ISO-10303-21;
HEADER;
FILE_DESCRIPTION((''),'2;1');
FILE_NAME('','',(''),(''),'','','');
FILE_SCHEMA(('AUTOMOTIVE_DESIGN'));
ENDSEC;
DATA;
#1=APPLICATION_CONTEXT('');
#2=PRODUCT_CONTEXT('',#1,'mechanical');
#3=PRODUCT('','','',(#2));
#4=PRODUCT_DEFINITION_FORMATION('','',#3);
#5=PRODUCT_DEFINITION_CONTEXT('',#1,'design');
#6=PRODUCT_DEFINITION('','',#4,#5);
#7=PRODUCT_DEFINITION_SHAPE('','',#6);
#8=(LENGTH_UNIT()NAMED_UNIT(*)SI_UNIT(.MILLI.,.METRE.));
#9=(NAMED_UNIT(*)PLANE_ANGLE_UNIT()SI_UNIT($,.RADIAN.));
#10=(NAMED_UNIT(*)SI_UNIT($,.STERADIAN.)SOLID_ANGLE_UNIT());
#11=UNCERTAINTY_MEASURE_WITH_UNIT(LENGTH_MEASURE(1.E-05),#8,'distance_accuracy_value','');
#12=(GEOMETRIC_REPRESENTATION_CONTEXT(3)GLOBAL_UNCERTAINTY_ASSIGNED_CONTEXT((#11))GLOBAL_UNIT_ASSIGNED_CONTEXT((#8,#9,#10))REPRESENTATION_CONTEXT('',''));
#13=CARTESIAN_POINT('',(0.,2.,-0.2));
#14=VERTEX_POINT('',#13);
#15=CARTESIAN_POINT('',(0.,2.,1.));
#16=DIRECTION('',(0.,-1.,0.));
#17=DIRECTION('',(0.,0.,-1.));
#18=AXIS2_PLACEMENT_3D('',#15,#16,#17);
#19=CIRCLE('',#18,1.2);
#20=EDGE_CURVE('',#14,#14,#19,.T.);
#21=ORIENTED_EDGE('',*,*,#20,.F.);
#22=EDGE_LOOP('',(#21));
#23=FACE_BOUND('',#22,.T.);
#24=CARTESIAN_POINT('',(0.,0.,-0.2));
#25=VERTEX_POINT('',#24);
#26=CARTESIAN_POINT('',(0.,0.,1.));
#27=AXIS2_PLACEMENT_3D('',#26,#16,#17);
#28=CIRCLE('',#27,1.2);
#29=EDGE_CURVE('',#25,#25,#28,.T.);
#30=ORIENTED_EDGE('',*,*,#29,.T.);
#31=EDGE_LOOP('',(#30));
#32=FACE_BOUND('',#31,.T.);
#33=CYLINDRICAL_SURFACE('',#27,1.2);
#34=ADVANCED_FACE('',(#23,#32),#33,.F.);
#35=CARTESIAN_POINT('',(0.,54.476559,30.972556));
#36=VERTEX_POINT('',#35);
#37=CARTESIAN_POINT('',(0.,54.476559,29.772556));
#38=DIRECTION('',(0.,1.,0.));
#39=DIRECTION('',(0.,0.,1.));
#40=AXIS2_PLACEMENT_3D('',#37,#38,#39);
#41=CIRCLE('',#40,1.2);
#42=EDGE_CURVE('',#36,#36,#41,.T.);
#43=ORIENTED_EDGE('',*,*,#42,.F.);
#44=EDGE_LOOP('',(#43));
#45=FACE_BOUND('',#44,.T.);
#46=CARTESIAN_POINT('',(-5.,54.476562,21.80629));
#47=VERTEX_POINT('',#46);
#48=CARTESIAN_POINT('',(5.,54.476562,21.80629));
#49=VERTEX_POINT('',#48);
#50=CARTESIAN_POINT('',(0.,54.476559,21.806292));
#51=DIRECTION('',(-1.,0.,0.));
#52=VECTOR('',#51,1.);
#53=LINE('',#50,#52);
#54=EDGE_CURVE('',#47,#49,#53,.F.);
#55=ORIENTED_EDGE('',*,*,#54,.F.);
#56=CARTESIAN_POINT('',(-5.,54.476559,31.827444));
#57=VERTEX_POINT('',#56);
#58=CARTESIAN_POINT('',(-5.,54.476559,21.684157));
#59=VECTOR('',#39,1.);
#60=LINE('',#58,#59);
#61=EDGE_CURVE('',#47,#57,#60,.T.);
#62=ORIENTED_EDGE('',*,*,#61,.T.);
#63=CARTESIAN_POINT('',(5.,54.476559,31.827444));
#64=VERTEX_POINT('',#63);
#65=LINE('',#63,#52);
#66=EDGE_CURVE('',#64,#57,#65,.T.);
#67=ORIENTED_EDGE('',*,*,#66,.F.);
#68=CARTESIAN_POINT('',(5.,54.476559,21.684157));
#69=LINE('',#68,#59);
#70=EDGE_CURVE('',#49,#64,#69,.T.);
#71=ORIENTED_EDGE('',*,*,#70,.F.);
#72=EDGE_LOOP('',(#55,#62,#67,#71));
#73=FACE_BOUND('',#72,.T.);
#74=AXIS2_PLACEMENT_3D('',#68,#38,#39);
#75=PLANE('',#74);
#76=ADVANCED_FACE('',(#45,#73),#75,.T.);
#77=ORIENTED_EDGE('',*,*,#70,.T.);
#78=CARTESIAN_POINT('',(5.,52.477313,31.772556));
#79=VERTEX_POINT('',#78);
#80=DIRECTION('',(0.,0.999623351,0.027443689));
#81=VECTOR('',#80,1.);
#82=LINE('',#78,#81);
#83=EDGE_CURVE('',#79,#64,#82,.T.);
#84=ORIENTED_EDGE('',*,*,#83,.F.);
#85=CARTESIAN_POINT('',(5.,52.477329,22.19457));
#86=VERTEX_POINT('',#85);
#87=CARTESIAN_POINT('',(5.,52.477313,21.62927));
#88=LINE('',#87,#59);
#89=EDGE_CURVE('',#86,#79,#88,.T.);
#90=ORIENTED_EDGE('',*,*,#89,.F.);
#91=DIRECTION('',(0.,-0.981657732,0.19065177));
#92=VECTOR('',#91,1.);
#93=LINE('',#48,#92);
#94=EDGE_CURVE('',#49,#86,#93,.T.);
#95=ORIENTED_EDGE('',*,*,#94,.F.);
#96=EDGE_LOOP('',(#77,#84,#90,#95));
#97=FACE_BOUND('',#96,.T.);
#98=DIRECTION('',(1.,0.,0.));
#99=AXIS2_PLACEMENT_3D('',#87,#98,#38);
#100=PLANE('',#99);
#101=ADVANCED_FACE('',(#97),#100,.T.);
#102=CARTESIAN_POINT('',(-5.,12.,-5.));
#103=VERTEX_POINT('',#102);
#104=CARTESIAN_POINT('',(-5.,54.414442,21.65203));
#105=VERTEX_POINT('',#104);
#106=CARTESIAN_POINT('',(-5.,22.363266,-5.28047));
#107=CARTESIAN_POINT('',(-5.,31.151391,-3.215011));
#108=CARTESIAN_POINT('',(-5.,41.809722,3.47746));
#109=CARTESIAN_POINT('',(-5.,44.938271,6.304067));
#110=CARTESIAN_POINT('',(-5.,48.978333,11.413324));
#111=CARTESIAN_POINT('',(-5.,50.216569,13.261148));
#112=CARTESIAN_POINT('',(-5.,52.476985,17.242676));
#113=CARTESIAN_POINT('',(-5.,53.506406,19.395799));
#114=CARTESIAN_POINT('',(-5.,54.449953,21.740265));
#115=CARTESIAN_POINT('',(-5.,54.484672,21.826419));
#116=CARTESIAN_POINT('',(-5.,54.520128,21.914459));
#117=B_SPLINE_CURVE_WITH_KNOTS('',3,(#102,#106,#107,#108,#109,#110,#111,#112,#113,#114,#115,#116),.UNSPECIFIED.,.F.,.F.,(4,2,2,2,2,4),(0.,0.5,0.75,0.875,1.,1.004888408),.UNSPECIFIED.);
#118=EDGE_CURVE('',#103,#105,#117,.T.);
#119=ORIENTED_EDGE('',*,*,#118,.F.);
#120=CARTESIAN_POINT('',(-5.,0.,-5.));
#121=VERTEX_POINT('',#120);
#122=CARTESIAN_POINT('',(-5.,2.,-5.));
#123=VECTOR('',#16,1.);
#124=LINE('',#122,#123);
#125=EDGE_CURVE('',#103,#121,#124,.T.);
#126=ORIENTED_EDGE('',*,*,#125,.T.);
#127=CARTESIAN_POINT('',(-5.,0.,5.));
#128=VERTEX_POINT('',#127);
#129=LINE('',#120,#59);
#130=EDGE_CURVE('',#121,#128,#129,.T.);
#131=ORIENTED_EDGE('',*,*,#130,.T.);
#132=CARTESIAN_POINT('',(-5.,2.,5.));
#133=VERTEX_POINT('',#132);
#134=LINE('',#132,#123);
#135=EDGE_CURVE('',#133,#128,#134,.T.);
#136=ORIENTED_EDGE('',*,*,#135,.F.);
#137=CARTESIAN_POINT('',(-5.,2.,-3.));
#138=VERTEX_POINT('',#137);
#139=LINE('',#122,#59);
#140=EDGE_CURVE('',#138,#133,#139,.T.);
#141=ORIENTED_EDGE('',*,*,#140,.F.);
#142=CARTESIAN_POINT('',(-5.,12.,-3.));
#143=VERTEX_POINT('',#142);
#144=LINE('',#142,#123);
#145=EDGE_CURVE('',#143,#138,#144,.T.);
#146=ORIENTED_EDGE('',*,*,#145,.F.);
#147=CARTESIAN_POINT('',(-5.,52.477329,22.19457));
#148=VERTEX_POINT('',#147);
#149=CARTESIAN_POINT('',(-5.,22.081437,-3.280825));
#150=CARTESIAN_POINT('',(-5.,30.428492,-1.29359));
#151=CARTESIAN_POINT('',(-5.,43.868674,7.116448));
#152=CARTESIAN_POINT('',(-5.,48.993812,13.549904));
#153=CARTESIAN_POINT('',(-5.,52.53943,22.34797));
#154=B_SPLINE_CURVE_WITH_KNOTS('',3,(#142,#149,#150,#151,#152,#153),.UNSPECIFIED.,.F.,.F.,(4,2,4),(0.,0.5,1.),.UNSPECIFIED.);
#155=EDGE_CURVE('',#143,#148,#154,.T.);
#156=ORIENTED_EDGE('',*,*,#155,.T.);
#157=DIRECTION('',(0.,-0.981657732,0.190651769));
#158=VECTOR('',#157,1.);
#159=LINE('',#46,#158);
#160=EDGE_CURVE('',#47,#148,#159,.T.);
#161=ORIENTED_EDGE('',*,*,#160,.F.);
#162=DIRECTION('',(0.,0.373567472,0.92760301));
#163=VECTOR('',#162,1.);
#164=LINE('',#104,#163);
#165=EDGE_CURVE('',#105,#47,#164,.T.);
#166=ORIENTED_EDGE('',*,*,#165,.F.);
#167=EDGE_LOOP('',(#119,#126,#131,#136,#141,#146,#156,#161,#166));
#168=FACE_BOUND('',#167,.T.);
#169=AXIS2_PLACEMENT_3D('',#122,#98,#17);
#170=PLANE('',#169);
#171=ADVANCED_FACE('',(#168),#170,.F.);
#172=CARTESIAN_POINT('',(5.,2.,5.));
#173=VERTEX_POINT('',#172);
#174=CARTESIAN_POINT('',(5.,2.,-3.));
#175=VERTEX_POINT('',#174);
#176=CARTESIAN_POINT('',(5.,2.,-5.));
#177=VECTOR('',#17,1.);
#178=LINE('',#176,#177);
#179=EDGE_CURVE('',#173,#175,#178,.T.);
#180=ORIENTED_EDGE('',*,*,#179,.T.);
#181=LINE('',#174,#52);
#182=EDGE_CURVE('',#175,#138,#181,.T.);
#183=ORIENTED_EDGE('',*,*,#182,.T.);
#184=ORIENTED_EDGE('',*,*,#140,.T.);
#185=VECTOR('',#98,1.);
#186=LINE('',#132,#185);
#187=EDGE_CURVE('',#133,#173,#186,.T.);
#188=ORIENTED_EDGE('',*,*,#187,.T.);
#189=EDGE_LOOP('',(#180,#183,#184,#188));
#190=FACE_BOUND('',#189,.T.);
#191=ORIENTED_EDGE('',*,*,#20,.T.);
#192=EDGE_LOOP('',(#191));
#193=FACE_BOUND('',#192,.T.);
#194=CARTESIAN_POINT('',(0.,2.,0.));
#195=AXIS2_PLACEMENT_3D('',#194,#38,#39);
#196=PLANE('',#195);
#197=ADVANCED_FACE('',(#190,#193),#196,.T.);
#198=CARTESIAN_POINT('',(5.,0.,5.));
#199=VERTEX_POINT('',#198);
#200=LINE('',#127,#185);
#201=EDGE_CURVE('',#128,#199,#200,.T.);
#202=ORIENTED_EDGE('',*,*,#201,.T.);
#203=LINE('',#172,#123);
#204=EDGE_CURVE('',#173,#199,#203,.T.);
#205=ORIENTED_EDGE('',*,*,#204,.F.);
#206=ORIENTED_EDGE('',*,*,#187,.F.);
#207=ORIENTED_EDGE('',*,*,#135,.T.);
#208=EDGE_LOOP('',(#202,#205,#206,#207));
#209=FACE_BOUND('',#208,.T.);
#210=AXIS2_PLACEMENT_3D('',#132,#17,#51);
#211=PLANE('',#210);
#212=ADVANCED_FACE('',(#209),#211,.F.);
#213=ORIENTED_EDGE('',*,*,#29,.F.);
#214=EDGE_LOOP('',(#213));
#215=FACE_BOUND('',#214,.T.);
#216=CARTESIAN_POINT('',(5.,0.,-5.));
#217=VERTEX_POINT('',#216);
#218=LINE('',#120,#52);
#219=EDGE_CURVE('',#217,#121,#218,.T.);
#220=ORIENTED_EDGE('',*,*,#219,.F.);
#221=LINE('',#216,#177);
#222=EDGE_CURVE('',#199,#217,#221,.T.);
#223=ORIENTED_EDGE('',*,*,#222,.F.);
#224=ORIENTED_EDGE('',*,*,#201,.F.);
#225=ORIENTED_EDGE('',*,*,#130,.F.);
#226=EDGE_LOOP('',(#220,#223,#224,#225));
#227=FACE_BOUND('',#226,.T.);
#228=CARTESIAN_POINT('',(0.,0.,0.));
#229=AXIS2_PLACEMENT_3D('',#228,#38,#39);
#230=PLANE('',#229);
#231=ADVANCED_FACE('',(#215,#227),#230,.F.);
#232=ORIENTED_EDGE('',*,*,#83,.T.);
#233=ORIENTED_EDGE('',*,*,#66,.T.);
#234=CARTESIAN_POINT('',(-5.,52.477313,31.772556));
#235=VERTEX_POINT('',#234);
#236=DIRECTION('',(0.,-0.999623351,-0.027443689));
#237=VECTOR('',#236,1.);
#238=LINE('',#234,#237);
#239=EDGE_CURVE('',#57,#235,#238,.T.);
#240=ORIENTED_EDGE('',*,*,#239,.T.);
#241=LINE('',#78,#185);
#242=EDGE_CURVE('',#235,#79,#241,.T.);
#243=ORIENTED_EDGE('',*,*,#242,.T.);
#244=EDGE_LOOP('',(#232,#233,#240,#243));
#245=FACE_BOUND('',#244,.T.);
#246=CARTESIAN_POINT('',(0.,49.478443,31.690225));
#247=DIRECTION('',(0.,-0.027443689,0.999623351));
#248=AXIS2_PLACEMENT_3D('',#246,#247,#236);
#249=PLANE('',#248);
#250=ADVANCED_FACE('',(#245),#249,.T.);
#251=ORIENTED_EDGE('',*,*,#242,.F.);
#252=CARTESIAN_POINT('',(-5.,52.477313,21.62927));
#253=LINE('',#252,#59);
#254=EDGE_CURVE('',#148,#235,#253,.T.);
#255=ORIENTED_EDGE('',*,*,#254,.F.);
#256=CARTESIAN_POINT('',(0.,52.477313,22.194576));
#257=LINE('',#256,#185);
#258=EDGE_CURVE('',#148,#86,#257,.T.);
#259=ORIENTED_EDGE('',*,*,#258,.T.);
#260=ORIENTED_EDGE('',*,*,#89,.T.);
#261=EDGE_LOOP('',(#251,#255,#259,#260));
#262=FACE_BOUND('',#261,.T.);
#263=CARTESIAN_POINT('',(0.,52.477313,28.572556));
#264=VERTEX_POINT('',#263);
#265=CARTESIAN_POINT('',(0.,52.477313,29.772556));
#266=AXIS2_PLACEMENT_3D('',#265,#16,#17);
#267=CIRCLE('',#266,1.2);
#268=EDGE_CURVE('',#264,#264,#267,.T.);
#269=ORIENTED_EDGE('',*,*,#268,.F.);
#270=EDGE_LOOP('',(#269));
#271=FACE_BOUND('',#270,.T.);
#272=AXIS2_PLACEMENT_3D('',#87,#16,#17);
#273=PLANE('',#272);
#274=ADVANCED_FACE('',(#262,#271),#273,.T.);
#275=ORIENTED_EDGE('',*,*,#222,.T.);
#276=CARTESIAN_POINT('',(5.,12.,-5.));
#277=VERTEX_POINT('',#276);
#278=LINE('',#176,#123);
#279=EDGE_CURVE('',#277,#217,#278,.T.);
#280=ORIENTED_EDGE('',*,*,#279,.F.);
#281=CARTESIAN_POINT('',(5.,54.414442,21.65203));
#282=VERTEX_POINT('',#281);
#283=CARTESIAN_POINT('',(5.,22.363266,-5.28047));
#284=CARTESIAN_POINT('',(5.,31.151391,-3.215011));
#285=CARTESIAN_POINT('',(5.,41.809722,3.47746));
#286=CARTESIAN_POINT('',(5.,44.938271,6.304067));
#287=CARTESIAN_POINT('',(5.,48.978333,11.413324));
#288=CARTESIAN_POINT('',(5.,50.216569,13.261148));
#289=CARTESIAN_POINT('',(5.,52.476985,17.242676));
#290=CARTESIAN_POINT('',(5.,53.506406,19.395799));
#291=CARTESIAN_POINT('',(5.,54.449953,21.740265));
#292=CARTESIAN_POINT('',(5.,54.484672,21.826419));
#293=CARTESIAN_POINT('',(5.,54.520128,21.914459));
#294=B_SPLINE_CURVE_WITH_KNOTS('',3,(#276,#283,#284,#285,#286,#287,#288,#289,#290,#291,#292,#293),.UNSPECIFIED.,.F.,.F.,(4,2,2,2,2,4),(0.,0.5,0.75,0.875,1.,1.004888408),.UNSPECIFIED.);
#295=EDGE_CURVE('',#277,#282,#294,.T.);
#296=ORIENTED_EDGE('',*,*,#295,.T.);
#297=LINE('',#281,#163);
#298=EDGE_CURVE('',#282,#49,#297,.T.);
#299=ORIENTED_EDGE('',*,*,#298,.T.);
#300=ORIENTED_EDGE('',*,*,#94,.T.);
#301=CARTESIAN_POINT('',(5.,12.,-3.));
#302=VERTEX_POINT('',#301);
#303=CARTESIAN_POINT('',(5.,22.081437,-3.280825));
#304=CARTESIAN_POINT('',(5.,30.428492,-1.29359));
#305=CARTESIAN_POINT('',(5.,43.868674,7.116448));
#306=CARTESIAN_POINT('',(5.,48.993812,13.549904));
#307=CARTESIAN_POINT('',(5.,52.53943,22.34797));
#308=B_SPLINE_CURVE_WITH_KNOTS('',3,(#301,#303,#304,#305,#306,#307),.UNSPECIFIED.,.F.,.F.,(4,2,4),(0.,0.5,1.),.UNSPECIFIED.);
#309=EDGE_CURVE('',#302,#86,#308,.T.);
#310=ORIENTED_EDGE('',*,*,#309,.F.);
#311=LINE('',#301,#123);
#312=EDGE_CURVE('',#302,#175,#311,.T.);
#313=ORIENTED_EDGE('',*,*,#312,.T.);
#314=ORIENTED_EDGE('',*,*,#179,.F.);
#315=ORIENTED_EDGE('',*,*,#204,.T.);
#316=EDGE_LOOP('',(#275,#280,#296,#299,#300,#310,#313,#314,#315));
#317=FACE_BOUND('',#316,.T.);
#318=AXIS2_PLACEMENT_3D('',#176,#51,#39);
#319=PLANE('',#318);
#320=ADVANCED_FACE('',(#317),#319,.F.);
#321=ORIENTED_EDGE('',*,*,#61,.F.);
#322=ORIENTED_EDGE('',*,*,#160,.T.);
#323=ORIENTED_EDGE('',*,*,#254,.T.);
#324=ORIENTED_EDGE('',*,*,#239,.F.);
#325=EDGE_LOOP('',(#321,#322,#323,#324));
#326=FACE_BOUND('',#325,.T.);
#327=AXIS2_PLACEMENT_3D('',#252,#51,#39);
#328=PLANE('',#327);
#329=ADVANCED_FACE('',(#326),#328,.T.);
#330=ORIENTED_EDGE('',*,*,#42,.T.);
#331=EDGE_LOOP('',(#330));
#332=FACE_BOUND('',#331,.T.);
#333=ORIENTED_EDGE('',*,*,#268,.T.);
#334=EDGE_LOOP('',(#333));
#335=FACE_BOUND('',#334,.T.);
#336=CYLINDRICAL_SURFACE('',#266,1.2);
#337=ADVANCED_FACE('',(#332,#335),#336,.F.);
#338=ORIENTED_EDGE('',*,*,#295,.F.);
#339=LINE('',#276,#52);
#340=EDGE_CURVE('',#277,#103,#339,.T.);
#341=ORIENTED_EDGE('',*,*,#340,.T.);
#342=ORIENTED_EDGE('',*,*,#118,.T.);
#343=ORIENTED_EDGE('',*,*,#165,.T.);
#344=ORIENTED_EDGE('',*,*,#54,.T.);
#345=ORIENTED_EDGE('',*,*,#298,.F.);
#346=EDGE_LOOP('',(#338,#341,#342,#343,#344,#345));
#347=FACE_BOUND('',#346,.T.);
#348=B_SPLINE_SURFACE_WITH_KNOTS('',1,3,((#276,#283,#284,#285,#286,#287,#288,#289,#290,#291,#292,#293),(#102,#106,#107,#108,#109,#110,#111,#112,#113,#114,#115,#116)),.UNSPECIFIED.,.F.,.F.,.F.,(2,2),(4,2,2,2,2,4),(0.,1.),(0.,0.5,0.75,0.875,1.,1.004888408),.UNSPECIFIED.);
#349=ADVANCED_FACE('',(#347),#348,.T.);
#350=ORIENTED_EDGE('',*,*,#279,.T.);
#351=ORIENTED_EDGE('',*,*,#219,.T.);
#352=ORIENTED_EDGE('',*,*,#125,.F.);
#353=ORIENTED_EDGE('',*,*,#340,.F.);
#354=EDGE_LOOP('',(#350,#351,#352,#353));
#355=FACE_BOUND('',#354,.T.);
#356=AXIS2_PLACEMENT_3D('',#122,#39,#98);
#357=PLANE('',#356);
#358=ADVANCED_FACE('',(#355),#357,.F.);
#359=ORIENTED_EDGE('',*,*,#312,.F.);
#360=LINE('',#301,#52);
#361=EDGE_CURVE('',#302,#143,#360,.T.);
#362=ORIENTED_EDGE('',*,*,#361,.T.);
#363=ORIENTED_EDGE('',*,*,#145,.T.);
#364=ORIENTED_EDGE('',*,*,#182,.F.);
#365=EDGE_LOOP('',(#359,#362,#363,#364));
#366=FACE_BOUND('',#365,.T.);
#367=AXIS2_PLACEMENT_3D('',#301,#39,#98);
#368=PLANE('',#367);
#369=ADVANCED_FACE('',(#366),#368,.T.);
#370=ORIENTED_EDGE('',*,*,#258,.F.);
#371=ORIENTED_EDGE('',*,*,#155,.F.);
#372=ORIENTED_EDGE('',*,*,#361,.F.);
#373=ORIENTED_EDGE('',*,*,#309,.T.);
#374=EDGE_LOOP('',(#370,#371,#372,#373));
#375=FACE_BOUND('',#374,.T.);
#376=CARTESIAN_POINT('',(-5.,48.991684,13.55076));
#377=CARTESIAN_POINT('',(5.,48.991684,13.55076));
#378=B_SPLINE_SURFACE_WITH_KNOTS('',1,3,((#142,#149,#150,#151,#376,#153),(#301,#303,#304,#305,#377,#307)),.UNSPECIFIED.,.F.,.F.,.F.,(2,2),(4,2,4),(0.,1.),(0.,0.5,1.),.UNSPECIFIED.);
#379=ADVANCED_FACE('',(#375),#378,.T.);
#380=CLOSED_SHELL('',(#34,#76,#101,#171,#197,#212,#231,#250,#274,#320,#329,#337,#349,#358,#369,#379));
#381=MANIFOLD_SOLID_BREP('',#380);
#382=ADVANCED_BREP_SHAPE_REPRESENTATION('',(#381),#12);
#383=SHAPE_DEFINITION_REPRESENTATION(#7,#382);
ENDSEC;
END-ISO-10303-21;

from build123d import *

# Parameters (mm, degrees)
SKETCH2_W                = 10
SKETCH2_H                = 10
BOSS_EXTRUDE1_DEPTH      = 2
M2_CLEARANCE_HOLE1_D     = 2.4
M2_CLEARANCE_HOLE1_DEPTH = 2
M2_CLEARANCE_HOLE1_TIP   = 0.721032743
SKETCH5_W                = 10
SKETCH5_H                = 2
BOSS_EXTRUDE2_DEPTH      = 10
SWEEP1_START             = -5
SWEEP1_DEPTH             = 10
M2_CLEARANCE_HOLE2_D     = 2.4


# Read off the part's stored shape, not the designer's step: Sweep1
with BuildPart() as part:
    # Sketch2 → Boss-Extrude1 (new body)
    with BuildSketch(Plane(origin=(0, 0, 0), x_dir=(1, 0, 0), z_dir=(0, 1, 0))):
        Rectangle(SKETCH2_W, SKETCH2_H)
    extrude(amount=BOSS_EXTRUDE1_DEPTH)

    # M2 Clearance Hole1
    with Locations(Plane(origin=(0, 0, 0), x_dir=(-1, 0, 0), z_dir=(0, -1, 0))):
        with Locations((0, -1)):
            Hole(M2_CLEARANCE_HOLE1_D / 2, depth=M2_CLEARANCE_HOLE1_DEPTH)
            with Locations((0, 0, -(M2_CLEARANCE_HOLE1_DEPTH + M2_CLEARANCE_HOLE1_TIP / 2))):  # 118° drill point
                Cone(0, M2_CLEARANCE_HOLE1_D / 2, M2_CLEARANCE_HOLE1_TIP, mode=Mode.SUBTRACT)

    # Sketch5 → Boss-Extrude2 (add)
    with BuildSketch(Plane(origin=(0, 2, 0), x_dir=(1, 0, 0), z_dir=(0, 1, 0))):
        with Locations((0, 4)):
            Rectangle(SKETCH5_W, SKETCH5_H)
    extrude(amount=BOSS_EXTRUDE2_DEPTH)

    # Sweep1 outline → Sweep1 (add)
    with BuildSketch(Plane.YZ.offset(SWEEP1_START)):
        with BuildLine():
            add(Edge.make_bspline(
                [(12, -3), (22.081437319, -3.280824846), (30.428491616, -1.29359039), (43.829554593, 7.091969611), (48.931984519, 13.47592334), (52.477312717, 22.194576498)],
                knots=[0, 0, 0, 0, 0.5, 0.5, 0.99708935, 0.99708935, 0.99708935, 0.99708935], degree=3))
            Line((12, -3), (12, -5))
            add(Edge.make_bspline(
                [(12, -5), (22.363265836, -5.280469752), (31.151391085, -3.215010639), (41.80972213, 3.477460348), (44.938271104, 6.304066685), (48.978333418, 11.413324262), (50.216569106, 13.261147564), (52.476984989, 17.242675991), (53.506405959, 19.395799121), (54.435317643, 21.703901173), (54.455920091, 21.755052947), (54.476559414, 21.806291518)],
                knots=[0, 0, 0, 0, 0.5, 0.5, 0.75, 0.75, 0.875, 0.875, 1, 1, 1.002873769, 1.002873769, 1.002873769, 1.002873769], degree=3))
            Line((54.476559414, 21.806291518), (54.476559414, 31.827443689))
            Line((54.476559414, 31.827443689), (52.477312712, 31.772556311))
            Line((52.477312712, 31.772556311), (52.477312717, 22.194576498))
        make_face()
    extrude(amount=SWEEP1_DEPTH)

    # M2 Clearance Hole2 (through all)
    with Locations(Plane(origin=(0, 52.477312712, 0), x_dir=(-1, 0, 0), z_dir=(0, -1, 0))):
        with Locations((0, -29.772556311)):
            Hole(M2_CLEARANCE_HOLE2_D / 2)


solid = part.part
